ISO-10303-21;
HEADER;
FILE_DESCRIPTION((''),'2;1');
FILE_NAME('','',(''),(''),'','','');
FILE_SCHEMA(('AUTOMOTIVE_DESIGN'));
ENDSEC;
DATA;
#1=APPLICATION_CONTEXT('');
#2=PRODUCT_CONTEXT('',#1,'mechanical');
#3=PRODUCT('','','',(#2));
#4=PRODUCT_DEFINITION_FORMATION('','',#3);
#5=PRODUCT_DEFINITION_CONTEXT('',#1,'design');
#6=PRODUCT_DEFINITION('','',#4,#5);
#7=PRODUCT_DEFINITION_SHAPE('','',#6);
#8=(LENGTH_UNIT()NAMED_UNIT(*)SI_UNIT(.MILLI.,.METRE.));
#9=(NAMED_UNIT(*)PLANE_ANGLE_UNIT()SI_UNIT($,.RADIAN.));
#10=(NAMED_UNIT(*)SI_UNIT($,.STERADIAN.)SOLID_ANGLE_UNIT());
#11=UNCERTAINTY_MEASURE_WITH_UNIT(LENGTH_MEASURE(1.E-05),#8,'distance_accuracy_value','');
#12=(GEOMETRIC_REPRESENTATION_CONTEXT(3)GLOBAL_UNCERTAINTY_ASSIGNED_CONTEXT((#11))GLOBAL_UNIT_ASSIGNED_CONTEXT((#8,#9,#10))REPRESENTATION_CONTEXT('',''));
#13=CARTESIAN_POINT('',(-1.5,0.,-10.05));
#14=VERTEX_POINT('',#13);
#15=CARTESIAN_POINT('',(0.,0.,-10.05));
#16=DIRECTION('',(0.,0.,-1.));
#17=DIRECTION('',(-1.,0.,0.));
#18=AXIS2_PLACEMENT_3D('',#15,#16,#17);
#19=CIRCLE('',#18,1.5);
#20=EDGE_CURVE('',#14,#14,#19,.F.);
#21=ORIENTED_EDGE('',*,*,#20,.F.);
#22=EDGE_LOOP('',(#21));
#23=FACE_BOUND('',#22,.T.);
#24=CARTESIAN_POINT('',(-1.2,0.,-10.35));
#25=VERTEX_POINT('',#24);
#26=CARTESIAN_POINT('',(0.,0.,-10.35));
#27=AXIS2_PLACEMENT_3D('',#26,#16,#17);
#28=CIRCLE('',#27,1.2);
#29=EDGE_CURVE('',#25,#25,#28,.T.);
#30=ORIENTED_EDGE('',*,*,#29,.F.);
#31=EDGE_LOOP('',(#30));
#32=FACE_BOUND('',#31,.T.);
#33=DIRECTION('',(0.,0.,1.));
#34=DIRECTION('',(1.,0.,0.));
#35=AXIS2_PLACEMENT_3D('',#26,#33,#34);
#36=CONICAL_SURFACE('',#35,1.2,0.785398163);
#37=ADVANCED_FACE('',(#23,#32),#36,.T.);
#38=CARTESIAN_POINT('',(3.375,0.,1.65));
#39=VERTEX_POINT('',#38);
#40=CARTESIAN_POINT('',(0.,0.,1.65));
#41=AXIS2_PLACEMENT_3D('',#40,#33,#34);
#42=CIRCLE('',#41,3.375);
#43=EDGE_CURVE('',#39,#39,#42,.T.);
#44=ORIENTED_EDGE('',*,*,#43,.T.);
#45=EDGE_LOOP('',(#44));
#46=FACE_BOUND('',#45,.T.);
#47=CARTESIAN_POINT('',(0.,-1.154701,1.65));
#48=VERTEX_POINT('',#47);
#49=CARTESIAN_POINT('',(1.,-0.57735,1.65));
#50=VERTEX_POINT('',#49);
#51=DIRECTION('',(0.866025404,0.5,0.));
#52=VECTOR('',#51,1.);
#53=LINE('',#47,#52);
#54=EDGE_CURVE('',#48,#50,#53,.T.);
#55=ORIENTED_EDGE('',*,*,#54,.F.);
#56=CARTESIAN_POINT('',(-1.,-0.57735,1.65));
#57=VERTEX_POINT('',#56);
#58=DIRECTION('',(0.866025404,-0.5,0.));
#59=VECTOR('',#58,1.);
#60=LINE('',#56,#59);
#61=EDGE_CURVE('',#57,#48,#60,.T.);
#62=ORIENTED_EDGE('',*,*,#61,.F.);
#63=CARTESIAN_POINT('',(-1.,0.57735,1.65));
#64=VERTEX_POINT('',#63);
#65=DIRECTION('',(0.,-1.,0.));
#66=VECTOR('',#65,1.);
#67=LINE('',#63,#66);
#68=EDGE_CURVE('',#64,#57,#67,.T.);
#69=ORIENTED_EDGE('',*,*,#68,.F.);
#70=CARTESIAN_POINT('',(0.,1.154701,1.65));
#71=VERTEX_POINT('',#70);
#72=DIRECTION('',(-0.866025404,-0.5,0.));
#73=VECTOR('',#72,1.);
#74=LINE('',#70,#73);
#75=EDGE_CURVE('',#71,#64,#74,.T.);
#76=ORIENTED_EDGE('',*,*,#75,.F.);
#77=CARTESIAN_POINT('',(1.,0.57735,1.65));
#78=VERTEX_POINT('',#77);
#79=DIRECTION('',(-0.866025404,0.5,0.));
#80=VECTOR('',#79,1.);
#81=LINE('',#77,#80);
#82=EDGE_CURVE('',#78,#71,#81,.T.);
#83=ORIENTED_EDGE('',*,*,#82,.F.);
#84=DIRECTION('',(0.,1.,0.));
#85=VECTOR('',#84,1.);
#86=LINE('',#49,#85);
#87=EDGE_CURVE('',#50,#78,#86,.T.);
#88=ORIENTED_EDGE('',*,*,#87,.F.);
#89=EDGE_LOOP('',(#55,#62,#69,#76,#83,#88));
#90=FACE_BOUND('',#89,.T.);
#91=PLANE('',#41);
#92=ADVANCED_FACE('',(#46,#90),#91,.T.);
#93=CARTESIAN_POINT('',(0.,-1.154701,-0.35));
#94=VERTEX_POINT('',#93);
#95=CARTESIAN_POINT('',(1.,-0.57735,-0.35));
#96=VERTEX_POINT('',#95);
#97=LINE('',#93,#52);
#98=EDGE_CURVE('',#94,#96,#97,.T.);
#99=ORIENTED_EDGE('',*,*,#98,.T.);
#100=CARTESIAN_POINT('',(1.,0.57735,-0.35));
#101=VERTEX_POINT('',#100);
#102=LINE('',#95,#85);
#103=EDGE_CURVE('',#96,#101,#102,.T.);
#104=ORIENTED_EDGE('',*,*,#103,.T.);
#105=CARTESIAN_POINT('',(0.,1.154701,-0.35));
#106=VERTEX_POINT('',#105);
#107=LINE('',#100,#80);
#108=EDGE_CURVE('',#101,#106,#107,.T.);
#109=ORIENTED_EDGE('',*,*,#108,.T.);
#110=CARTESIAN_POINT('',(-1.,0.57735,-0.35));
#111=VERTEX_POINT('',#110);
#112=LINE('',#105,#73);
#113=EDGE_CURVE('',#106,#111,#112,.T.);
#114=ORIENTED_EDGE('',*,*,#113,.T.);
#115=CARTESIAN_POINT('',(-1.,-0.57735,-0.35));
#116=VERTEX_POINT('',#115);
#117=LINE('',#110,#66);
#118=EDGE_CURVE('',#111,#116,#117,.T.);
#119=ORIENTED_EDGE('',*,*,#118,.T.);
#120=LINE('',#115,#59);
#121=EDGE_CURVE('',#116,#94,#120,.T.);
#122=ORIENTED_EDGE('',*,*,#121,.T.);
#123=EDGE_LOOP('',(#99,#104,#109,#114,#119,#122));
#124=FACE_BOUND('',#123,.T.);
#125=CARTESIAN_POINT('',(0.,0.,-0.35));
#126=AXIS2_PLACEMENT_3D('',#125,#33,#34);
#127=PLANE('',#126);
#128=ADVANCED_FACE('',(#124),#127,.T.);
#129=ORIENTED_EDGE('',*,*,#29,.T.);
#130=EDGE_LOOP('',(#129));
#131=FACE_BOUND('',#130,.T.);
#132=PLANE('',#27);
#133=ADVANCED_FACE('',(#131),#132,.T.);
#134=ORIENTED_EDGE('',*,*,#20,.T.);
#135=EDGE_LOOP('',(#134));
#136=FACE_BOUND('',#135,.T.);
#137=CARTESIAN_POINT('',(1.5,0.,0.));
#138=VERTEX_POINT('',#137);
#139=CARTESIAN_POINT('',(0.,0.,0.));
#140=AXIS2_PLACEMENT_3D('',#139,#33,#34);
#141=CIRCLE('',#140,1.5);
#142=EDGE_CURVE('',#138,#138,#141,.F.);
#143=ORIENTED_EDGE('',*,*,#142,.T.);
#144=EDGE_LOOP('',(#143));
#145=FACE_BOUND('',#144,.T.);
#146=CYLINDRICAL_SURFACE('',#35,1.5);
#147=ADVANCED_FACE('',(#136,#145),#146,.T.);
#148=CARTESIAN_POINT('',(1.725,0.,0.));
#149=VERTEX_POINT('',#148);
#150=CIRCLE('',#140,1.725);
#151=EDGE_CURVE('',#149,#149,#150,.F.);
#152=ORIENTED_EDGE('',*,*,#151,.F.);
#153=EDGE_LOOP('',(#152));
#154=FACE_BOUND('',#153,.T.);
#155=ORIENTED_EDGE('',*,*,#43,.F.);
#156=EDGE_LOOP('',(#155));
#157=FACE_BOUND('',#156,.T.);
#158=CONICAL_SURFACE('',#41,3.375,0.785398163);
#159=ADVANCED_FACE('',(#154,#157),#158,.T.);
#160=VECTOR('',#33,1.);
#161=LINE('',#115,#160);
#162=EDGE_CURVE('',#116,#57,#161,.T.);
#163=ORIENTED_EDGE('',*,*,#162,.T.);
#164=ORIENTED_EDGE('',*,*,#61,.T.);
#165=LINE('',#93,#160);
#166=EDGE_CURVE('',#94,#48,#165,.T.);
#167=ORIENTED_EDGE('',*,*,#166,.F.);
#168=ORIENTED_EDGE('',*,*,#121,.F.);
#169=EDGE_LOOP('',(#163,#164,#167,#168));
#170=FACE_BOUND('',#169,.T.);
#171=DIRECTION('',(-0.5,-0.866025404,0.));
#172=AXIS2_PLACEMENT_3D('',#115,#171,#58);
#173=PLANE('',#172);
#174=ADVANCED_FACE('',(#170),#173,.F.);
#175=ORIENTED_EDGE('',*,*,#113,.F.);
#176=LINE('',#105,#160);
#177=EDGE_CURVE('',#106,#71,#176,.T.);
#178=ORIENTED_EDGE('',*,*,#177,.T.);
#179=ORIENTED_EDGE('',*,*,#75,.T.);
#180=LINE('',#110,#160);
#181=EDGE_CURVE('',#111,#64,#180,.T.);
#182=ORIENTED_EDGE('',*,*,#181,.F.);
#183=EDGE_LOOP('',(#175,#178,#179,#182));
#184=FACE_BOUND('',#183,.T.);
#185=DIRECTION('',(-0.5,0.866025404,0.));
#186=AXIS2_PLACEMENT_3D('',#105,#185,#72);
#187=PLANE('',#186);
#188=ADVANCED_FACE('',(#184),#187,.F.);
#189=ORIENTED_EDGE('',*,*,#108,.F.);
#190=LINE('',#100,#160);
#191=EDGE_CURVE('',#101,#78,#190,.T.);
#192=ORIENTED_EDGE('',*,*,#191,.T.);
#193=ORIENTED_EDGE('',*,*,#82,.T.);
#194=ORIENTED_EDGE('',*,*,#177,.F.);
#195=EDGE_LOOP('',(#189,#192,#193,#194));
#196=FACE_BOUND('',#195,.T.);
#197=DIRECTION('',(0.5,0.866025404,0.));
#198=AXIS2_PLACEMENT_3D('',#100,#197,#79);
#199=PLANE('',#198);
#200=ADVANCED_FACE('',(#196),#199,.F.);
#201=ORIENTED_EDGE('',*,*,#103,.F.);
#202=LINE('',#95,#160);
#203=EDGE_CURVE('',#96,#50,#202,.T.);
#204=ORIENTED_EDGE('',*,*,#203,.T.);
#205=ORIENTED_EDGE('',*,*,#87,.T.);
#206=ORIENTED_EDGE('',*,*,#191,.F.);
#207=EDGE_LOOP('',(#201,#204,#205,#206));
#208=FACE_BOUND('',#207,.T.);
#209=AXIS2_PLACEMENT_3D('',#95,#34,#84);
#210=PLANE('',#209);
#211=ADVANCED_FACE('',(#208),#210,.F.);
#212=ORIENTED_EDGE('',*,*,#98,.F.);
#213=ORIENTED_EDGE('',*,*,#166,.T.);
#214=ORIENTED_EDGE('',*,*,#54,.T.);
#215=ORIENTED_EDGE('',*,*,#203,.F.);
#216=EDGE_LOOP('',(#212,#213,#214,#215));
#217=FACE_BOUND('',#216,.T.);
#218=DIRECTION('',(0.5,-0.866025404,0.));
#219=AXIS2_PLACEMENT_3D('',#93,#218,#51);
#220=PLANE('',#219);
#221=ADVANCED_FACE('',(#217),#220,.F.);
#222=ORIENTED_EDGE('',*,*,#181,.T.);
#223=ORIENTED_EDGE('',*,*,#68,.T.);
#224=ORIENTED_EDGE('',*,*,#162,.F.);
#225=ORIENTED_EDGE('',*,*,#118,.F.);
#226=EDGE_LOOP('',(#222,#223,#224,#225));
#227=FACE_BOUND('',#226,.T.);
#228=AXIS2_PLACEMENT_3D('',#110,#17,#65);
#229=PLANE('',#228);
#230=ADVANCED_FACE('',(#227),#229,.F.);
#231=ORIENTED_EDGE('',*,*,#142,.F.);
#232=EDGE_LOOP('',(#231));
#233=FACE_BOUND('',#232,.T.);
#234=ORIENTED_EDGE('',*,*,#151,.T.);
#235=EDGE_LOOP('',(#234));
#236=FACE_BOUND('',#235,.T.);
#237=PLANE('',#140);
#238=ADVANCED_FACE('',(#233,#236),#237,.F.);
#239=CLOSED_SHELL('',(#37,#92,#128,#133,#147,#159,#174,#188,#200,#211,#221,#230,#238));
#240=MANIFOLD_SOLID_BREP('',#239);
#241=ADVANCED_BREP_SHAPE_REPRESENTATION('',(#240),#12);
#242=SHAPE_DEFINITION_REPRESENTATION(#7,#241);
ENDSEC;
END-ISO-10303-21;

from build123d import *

# Parameters (mm, degrees)
SKETCH1_R           = 3.375
BOSS_EXTRUDE1_DEPTH = 1.65
SKETCH2_R           = 1.5
BOSS_EXTRUDE2_DEPTH = 10.35
CHAMFER1_SIZE       = 0.3
CUT_EXTRUDE1_DEPTH  = 2
CHAMFER2_SIZE       = 1.65


with BuildPart() as part:
    # Sketch1 → Boss-Extrude1 (new body)
    with BuildSketch(Plane.XY):
        Circle(SKETCH1_R)
    extrude(amount=BOSS_EXTRUDE1_DEPTH)

    # Sketch2 → Boss-Extrude2 (add)
    with BuildSketch(Plane(origin=(0, 0, 0), x_dir=(-1, 0, 0), z_dir=(0, 0, -1))):
        with Locations(Location((0, 0, 0), (0, 0, 180))):
            Circle(SKETCH2_R)
    extrude(amount=BOSS_EXTRUDE2_DEPTH)

    # Chamfer1
    chamfer1_edges = [part.edges().sort_by_distance(p)[0] for p in [
        (-1.5, 0, -10.35),
    ]]
    chamfer(chamfer1_edges, length=CHAMFER1_SIZE)

    # Sketch3 → Cut-Extrude1 (cut)
    with BuildSketch(Plane.XY.offset(1.65)):
        Polygon((0, 1.154700538), (-1, 0.577350269), (-1, -0.577350269), (0, -1.154700538), (1, -0.577350269), (1, 0.577350269), align=None)
    extrude(amount=-CUT_EXTRUDE1_DEPTH, mode=Mode.SUBTRACT)

    # Chamfer2
    chamfer2_edges = [part.edges().sort_by_distance(p)[0] for p in [
        (-3.375, 0, 0),
    ]]
    chamfer(chamfer2_edges, length=CHAMFER2_SIZE - 0.0001)  # a hair under: the kernel refuses the full size


solid = part.part
